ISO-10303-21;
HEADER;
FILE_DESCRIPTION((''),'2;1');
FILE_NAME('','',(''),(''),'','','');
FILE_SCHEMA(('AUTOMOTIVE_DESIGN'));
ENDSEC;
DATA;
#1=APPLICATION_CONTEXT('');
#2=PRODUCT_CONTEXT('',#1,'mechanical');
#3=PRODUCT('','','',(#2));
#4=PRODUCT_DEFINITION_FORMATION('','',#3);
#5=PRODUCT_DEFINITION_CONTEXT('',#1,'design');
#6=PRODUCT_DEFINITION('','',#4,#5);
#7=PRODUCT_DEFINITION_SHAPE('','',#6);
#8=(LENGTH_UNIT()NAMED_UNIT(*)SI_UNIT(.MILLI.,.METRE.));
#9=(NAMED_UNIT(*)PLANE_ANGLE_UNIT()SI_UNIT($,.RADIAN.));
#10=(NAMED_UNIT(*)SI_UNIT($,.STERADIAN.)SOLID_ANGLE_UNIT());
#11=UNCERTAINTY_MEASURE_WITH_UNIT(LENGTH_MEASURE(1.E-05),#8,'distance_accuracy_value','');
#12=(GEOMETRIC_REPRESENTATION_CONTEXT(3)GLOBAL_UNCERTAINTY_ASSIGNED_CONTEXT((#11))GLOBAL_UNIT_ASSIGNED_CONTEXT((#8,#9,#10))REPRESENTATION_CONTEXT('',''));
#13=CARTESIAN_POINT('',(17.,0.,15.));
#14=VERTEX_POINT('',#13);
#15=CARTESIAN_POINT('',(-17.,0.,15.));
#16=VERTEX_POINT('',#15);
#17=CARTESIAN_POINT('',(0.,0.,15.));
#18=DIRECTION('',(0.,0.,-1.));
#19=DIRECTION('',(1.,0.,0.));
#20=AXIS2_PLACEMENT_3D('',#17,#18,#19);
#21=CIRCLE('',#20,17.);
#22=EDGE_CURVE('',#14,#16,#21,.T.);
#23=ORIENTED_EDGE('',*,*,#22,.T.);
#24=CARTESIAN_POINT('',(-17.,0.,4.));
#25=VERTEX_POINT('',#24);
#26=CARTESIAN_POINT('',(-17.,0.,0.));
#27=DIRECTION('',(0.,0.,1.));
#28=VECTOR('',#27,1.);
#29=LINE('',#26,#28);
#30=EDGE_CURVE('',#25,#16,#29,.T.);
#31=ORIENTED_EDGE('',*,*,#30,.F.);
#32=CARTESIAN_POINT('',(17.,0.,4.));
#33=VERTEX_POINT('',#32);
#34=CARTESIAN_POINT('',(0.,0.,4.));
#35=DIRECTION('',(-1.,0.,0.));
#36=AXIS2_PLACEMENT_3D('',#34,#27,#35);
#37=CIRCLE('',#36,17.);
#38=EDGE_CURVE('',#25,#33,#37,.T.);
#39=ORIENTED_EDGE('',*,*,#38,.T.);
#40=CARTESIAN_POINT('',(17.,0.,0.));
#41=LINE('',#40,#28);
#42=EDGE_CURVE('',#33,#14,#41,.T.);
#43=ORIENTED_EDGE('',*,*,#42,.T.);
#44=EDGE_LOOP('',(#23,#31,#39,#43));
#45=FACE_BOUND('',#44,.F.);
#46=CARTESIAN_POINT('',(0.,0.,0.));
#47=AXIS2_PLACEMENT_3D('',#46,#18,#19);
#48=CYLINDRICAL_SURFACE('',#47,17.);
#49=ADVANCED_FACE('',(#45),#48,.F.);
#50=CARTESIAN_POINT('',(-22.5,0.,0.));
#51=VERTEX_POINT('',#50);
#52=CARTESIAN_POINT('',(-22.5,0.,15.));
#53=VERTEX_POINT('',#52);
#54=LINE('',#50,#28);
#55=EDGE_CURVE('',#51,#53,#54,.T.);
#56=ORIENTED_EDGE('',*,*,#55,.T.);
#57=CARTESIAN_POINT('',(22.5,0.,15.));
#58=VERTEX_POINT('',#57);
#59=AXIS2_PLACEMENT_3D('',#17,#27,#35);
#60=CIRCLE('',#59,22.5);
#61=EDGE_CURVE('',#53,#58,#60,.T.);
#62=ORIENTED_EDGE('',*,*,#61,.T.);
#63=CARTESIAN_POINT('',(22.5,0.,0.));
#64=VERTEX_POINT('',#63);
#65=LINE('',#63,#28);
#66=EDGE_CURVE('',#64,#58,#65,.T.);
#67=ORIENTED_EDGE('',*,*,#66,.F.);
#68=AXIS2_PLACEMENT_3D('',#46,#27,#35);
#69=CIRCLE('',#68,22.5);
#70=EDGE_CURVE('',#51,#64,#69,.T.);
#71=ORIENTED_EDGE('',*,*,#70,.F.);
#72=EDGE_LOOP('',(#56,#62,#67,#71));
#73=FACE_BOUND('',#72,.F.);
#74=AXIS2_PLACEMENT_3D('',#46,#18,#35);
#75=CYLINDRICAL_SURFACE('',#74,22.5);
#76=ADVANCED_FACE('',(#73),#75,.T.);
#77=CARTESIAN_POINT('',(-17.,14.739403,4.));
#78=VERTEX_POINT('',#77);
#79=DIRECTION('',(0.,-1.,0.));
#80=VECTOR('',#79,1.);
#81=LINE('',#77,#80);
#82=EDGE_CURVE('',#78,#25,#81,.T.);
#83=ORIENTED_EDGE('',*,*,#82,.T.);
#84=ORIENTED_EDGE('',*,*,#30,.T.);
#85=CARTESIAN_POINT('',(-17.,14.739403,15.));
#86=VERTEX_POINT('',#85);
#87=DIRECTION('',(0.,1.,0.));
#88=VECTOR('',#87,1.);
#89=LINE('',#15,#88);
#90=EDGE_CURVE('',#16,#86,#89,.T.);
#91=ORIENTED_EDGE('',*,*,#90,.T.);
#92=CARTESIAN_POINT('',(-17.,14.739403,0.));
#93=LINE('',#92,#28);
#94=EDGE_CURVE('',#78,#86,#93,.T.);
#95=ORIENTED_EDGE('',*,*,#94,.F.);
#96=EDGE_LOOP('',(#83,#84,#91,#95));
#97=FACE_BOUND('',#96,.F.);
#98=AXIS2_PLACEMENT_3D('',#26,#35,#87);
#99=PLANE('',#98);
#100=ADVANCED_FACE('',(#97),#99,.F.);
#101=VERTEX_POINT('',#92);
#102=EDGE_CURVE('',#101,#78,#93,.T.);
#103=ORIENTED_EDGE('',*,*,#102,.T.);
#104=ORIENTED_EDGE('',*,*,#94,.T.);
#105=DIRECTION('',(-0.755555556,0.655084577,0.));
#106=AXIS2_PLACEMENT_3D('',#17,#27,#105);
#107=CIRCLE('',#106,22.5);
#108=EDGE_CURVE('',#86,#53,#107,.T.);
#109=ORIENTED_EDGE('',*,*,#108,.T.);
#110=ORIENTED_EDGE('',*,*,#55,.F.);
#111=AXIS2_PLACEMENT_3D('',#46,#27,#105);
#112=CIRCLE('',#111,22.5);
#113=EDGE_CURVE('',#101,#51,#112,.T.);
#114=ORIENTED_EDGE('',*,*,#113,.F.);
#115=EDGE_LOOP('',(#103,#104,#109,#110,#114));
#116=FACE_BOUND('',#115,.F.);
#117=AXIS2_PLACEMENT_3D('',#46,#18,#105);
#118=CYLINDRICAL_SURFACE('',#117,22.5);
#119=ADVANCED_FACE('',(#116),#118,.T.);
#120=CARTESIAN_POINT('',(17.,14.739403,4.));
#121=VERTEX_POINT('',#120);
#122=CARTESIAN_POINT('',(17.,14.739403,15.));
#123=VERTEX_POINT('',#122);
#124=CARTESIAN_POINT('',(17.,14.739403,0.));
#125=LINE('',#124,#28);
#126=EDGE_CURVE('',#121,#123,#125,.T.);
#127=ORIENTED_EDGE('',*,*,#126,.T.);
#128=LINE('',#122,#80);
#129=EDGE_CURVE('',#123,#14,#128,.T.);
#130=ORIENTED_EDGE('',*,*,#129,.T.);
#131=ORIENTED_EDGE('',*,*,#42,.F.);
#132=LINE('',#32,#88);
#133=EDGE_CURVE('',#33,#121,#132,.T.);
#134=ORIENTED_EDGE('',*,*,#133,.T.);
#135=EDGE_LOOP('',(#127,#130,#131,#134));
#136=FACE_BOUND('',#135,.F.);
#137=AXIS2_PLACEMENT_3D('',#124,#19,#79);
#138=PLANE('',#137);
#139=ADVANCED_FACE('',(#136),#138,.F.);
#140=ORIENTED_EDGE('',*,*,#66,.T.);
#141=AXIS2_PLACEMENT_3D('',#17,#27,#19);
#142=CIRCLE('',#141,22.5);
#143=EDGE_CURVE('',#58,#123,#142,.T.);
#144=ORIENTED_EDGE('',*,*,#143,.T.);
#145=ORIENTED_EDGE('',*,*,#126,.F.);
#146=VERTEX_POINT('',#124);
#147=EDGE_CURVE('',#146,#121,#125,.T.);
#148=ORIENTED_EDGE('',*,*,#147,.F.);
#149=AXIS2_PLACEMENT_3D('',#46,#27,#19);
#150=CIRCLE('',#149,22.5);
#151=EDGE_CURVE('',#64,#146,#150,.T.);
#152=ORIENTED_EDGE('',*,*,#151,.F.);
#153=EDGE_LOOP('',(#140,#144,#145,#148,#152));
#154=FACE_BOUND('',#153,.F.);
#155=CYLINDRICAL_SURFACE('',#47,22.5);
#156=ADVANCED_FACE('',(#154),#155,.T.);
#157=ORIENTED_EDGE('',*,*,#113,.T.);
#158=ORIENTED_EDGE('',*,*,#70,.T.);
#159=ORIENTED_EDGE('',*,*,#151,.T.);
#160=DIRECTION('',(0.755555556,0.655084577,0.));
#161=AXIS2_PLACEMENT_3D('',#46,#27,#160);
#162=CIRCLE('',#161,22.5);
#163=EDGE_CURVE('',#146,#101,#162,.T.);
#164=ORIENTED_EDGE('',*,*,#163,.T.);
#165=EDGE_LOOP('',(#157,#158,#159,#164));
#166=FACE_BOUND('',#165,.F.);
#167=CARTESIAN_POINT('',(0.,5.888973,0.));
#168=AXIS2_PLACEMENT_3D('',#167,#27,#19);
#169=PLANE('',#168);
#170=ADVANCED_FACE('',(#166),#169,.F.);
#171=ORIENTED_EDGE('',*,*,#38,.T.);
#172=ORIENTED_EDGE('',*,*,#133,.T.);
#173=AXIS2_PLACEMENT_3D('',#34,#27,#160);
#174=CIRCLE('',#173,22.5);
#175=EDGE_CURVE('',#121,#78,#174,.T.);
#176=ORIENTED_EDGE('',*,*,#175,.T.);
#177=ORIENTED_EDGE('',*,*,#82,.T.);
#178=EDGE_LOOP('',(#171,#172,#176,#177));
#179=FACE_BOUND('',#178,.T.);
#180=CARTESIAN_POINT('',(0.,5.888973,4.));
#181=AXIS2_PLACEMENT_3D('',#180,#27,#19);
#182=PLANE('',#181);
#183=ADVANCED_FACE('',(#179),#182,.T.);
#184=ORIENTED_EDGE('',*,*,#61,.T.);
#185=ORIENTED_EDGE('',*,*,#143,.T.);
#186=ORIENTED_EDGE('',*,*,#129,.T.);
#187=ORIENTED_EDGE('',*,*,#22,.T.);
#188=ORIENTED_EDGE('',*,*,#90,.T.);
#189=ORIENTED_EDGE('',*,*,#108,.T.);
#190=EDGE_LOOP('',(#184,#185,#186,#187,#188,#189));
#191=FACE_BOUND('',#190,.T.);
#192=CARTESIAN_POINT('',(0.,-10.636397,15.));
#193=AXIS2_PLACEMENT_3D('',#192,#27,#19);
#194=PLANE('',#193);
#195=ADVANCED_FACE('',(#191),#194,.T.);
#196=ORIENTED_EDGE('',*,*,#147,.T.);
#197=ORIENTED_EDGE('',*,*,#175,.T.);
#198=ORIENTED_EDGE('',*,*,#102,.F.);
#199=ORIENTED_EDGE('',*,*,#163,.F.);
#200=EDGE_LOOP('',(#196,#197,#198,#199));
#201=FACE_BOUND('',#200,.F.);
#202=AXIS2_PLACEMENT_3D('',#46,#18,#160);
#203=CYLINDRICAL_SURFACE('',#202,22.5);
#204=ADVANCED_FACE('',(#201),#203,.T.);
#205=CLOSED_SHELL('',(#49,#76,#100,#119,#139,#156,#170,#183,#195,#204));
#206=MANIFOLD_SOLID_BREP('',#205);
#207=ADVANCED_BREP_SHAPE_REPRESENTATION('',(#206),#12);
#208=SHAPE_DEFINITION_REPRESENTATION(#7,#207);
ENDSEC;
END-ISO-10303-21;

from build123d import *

# Parameters (mm, degrees)
F1_DEPTH = 15
F2_DEPTH = 4


# Not quite as in the source:
# - a feature names something its author has since deleted; it is built from what else it names


with BuildPart() as f1:
    # F0 (on Top) → F1 (new body)
    with BuildSketch(Plane.XY):
        with BuildLine():
            Line((22.5, 0), (17, 0))
            ThreePointArc((17, 0), (0, -17), (-17, 0))
            Line((-17, 0), (-22.5, 0))
            ThreePointArc((-22.5, 0), (0, -22.5), (22.5, 0))
        make_face()
        with BuildLine():
            Line((-22.5, 0), (-17, 0))
            Line((-17, 0), (-17, 14.739402973))
            ThreePointArc((-17, 14.739402973), (-21.0802039838, 7.8660663613), (-22.5, 0))
        make_face()
        with BuildLine():
            Line((17, 14.739402973), (17, 0))
            Line((17, 0), (22.5, 0))
            ThreePointArc((22.5, 0), (21.0802039838, 7.8660663613), (17, 14.739402973))
        make_face()
    extrude(amount=F1_DEPTH)

    # F0 (on Top) → F2 (join)
    with BuildSketch(Plane.XY):
        with BuildLine():
            Line((-17, 0), (17, 0))
            ThreePointArc((17, 0), (0, 17), (-17, 0))
        make_face()
        with BuildLine():
            ThreePointArc((-17, 0), (0, -17), (17, 0))
            Line((17, 0), (-17, 0))
        make_face()
        with BuildLine():
            ThreePointArc((-17, 0), (0, 17), (17, 0))
            Line((17, 0), (17, 14.739402973))
            ThreePointArc((17, 14.739402973), (0, 22.5), (-17, 14.739402973))
            Line((-17, 14.739402973), (-17, 0))
        make_face()
    extrude(amount=F2_DEPTH)


solid = f1.part
